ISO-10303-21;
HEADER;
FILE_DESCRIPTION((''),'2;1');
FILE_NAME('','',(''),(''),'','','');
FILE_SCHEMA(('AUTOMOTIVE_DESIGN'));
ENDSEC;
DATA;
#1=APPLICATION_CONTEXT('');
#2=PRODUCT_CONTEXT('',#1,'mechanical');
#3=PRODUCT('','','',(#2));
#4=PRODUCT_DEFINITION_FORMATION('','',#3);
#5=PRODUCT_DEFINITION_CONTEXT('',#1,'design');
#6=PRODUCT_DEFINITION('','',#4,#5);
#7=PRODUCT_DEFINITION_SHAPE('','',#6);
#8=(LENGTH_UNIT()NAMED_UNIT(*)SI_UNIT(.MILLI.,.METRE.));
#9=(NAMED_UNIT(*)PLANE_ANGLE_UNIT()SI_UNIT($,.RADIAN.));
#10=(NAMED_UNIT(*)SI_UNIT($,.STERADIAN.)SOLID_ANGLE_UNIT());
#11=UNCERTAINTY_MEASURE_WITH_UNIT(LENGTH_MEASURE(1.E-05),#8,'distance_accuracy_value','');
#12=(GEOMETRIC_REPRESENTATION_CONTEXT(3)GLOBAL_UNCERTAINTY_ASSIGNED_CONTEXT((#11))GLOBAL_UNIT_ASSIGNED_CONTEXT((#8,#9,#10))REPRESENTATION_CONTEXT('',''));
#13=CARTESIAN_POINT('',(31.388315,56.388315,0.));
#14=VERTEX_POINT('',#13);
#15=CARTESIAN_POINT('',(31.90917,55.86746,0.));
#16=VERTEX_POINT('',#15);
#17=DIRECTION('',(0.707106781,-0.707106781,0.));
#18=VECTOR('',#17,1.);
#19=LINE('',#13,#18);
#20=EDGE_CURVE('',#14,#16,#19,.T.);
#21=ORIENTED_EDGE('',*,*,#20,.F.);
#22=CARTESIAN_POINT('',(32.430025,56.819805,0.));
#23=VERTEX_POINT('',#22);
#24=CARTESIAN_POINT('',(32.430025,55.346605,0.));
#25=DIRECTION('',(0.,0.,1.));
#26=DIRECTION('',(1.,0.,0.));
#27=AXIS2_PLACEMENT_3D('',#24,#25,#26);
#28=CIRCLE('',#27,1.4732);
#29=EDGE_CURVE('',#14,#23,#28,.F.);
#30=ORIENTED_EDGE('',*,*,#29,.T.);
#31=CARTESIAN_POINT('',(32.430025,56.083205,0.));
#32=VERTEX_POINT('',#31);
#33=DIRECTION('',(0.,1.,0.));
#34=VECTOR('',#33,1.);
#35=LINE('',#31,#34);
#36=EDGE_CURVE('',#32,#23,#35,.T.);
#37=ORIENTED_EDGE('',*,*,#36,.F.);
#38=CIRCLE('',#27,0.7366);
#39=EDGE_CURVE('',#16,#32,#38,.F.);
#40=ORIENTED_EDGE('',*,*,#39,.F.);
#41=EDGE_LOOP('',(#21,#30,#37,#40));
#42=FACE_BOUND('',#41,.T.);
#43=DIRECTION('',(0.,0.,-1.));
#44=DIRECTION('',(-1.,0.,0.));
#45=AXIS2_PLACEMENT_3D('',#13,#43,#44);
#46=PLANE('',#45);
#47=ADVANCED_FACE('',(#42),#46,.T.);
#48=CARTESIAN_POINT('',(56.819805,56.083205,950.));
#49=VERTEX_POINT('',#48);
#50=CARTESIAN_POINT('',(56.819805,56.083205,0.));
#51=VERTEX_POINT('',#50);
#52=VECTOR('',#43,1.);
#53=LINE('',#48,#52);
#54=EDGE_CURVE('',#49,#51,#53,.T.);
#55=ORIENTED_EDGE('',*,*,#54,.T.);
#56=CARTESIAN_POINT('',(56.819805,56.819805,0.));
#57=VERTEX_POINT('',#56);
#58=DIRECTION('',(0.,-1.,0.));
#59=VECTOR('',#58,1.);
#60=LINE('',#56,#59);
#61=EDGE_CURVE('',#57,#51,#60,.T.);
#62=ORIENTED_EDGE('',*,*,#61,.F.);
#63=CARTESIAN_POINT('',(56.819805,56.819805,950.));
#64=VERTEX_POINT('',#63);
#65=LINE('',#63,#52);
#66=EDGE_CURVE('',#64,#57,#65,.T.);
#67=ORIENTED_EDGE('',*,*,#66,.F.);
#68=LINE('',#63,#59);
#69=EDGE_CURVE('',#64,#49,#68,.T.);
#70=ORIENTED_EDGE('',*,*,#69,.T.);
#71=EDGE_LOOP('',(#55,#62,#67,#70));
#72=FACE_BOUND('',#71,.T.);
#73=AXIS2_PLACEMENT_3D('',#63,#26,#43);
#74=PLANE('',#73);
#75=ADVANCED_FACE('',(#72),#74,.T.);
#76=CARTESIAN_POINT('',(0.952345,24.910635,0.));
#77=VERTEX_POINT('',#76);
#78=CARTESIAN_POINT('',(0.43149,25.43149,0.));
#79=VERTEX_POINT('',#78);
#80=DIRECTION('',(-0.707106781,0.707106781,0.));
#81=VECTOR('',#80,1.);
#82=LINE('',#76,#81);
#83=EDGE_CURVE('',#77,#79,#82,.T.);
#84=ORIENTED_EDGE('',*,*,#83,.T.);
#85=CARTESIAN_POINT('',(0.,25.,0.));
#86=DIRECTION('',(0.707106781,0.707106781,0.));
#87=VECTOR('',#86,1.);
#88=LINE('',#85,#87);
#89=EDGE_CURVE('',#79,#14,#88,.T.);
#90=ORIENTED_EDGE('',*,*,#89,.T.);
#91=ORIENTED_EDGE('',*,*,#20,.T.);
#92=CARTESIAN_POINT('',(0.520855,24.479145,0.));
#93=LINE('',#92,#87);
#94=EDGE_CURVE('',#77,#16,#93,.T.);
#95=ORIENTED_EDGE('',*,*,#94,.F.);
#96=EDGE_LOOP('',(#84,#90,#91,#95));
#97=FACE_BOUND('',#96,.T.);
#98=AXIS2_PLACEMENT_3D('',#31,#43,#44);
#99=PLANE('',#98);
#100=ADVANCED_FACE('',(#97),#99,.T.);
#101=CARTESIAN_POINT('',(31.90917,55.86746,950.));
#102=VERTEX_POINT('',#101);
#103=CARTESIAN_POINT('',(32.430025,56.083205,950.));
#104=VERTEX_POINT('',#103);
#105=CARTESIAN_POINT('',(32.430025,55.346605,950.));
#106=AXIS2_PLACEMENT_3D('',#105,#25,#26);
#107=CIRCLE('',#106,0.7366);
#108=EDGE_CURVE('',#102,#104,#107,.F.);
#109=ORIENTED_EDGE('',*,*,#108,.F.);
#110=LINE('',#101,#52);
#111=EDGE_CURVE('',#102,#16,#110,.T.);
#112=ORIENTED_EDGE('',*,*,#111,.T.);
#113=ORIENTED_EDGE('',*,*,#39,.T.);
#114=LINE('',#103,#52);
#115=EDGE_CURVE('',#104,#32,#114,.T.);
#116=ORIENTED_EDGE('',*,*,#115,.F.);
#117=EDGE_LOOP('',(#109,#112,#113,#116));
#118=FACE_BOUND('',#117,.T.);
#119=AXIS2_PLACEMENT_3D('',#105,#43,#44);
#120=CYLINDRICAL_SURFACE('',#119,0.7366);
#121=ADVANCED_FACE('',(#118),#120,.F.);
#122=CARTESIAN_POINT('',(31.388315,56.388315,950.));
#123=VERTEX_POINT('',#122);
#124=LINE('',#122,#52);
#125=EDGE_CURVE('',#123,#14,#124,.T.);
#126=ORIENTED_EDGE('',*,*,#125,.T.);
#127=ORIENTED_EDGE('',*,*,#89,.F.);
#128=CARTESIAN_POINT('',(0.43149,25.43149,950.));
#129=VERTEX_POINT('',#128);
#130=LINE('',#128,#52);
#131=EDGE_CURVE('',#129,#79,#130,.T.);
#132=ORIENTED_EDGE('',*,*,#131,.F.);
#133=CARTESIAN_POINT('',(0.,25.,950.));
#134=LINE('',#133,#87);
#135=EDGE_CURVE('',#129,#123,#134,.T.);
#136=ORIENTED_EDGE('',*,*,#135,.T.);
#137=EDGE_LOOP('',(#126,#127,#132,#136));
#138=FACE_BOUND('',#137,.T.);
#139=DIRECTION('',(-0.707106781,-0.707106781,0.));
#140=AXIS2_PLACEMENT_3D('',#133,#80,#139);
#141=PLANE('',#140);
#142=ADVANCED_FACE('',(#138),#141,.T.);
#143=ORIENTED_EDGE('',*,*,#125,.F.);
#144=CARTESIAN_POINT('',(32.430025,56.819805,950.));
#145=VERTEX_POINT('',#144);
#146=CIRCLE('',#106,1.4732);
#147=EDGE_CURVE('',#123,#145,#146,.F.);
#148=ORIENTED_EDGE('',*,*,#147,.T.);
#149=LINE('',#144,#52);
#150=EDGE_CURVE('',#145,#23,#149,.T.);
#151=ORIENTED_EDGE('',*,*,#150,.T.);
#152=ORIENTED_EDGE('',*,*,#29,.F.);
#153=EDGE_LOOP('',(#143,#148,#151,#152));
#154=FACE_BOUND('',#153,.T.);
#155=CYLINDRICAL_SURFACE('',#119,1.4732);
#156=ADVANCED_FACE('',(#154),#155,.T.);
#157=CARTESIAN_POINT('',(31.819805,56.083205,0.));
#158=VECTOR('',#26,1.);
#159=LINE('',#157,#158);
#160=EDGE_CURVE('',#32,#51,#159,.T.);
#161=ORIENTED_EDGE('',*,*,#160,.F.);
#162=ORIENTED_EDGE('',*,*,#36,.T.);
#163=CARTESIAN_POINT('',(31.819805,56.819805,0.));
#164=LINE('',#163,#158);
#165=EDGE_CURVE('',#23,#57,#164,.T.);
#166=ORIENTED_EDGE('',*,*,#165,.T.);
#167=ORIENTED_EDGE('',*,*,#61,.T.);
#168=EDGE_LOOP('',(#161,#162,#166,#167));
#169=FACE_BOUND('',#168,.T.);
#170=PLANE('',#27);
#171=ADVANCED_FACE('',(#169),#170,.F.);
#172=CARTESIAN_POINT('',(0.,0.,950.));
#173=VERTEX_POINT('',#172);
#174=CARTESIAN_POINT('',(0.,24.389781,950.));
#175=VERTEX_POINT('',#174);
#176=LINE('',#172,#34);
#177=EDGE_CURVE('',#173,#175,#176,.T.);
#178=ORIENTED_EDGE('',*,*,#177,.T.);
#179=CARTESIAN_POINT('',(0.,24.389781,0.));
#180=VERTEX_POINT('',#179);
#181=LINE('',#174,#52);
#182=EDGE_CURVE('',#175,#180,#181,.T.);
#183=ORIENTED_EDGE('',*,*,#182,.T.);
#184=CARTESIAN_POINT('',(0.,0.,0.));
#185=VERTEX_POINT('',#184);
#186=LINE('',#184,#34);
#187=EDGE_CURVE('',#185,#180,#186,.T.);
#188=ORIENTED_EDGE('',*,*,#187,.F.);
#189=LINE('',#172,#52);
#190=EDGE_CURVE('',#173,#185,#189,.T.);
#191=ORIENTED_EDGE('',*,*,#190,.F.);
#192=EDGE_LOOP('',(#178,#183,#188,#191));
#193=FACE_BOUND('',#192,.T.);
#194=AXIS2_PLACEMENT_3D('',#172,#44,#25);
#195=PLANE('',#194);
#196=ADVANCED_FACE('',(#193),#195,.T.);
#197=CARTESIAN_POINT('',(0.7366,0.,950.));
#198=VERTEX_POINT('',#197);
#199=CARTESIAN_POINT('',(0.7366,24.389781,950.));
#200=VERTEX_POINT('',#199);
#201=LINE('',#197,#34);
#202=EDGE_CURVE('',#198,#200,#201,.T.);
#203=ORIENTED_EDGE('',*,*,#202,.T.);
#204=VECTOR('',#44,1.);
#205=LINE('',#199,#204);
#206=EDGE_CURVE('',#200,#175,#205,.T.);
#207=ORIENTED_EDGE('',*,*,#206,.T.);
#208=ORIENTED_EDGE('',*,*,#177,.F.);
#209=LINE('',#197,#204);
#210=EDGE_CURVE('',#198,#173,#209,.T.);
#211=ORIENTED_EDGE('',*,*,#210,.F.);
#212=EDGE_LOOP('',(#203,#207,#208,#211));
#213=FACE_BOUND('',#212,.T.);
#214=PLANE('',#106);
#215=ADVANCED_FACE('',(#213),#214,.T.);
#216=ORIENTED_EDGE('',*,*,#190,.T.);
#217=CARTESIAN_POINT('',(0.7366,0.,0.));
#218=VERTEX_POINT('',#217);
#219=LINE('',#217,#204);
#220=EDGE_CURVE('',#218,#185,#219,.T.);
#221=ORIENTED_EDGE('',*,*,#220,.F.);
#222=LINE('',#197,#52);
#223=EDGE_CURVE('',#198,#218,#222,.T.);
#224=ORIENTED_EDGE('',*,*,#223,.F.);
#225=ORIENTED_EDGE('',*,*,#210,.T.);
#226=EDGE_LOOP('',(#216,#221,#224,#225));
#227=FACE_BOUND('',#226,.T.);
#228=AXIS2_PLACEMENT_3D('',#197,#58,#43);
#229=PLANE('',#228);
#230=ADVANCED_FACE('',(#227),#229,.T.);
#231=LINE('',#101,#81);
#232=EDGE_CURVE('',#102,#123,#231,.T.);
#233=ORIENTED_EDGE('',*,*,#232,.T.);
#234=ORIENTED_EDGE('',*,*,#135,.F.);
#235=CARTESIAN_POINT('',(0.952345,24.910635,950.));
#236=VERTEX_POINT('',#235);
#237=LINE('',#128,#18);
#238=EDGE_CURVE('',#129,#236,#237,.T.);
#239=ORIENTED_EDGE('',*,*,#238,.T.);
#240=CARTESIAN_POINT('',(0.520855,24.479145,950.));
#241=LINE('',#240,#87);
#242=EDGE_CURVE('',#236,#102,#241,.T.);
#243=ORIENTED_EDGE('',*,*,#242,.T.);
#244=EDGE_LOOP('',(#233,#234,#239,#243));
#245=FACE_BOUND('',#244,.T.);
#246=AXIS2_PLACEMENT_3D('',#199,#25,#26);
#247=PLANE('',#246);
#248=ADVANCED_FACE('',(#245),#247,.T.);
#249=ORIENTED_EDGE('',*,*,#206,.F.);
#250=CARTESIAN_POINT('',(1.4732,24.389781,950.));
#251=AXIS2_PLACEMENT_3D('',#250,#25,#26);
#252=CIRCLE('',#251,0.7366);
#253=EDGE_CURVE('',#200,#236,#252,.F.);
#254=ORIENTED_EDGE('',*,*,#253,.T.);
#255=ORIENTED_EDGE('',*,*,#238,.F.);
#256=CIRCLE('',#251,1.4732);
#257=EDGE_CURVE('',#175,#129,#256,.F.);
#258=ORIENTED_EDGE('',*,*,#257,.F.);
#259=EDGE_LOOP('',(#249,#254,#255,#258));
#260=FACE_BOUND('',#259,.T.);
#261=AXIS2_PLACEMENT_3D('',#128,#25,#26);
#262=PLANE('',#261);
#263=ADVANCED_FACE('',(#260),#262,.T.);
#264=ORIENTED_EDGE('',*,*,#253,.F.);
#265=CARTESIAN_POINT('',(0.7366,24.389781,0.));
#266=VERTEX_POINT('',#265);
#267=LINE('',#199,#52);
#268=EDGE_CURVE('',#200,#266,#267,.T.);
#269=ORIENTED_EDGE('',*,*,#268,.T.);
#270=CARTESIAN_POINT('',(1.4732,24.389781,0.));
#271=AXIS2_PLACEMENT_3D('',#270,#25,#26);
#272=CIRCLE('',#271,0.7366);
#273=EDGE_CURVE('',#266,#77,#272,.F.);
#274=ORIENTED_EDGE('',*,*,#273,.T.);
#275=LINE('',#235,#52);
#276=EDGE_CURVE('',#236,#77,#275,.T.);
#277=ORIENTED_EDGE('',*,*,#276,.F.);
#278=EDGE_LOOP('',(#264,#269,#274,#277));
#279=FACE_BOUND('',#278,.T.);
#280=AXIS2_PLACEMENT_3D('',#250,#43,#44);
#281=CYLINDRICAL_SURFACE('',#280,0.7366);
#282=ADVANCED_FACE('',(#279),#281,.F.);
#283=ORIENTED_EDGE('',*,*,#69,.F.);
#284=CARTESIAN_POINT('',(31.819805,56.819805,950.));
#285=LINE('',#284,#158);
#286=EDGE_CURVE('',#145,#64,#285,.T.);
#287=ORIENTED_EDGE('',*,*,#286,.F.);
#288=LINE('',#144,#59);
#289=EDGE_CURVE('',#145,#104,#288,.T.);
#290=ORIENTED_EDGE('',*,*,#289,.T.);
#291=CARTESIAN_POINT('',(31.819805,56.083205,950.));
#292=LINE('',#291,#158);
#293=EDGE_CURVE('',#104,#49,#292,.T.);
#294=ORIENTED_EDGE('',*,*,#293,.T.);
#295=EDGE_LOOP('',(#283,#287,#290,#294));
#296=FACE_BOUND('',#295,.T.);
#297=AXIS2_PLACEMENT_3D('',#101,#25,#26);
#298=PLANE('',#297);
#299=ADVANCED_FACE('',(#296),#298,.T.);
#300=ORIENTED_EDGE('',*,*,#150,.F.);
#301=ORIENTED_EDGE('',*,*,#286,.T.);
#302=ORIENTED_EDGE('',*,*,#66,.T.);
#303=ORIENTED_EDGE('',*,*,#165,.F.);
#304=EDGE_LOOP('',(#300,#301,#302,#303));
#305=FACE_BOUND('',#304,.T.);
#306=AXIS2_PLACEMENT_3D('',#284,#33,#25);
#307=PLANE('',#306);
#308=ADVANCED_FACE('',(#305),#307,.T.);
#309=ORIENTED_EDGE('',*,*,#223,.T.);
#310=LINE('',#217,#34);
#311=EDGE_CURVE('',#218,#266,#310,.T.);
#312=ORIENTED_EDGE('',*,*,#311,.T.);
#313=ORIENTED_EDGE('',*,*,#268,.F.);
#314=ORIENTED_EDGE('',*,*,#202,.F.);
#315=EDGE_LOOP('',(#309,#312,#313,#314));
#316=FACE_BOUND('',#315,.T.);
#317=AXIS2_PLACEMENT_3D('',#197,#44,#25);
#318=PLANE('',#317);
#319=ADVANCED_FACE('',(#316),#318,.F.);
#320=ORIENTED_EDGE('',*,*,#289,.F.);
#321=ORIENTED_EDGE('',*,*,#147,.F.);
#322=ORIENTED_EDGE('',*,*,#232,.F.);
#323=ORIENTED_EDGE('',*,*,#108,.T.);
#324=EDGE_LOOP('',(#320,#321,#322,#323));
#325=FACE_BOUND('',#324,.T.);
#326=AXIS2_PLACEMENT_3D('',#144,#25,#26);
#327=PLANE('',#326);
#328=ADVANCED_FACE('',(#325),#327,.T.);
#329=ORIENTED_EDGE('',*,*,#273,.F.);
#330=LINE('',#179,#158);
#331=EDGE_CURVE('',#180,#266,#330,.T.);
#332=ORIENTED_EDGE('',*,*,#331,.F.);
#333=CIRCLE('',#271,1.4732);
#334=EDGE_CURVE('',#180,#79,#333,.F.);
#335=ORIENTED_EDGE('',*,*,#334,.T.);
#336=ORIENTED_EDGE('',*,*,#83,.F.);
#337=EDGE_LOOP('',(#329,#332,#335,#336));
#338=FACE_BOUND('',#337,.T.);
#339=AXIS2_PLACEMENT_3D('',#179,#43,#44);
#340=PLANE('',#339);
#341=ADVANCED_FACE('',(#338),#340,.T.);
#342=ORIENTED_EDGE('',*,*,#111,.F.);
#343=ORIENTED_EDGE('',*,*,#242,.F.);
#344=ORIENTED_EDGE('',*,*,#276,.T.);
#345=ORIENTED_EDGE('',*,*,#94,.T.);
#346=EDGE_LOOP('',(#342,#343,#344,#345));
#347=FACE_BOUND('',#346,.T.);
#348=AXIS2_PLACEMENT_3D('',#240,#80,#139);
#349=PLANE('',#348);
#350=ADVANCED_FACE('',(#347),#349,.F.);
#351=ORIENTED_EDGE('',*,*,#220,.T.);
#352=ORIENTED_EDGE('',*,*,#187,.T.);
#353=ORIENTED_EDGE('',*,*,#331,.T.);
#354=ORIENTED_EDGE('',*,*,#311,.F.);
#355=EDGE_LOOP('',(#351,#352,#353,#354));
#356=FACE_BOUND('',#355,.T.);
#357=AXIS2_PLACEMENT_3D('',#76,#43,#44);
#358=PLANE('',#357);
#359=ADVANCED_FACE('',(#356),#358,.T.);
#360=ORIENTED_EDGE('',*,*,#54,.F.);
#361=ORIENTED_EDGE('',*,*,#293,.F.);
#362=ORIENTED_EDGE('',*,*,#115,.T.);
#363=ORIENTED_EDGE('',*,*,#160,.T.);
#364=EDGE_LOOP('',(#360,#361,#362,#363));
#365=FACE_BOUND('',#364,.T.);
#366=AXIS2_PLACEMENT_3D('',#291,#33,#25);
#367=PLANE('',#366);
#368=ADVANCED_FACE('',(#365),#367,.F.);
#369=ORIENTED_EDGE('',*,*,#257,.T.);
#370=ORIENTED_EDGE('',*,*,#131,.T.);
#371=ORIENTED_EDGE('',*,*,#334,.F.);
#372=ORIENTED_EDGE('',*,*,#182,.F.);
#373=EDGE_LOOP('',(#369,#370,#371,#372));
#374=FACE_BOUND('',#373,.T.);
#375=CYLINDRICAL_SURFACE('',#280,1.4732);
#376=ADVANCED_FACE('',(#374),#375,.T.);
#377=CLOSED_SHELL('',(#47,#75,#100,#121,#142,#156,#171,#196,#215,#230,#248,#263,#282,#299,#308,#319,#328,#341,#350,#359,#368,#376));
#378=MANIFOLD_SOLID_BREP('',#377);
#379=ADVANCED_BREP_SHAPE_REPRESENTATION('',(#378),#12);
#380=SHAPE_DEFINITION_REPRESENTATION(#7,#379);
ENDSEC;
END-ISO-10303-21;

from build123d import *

# Parameters (mm, degrees)
BASE_FLANGE1_DEPTH = 950


# Sheet-metal steps are written as plain solids
with BuildPart() as part:
    # Sketch1 → Base-Flange1 (new body)
    with BuildSketch(Plane.XY):
        with BuildLine():
            Line((0, 0), (0, 24.38978058))
            ThreePointArc((0, 24.38978058), (0.112140673, 24.953549812), (0.43149029, 25.43149029))
            Line((0.43149029, 25.43149029), (31.388314863, 56.388314863))
            ThreePointArc((31.388314863, 56.388314863), (31.866255341, 56.707664481), (32.430024573, 56.819805153))
            Line((32.430024573, 56.819805153), (56.819805153, 56.819805153))
            Line((56.819805153, 56.819805153), (56.819805153, 56.083205153))
            Line((56.819805153, 56.083205153), (32.430024573, 56.083205153))
            ThreePointArc((32.430024573, 56.083205153), (32.148139957, 56.027134817), (31.909169718, 55.867460008))
            Line((31.909169718, 55.867460008), (0.952345145, 24.910635435))
            ThreePointArc((0.952345145, 24.910635435), (0.792670336, 24.671665196), (0.7366, 24.38978058))
            Line((0.7366, 24.38978058), (0.7366, 0))
            Line((0.7366, 0), (0, 0))
        make_face()
    extrude(amount=BASE_FLANGE1_DEPTH)


solid = part.part
